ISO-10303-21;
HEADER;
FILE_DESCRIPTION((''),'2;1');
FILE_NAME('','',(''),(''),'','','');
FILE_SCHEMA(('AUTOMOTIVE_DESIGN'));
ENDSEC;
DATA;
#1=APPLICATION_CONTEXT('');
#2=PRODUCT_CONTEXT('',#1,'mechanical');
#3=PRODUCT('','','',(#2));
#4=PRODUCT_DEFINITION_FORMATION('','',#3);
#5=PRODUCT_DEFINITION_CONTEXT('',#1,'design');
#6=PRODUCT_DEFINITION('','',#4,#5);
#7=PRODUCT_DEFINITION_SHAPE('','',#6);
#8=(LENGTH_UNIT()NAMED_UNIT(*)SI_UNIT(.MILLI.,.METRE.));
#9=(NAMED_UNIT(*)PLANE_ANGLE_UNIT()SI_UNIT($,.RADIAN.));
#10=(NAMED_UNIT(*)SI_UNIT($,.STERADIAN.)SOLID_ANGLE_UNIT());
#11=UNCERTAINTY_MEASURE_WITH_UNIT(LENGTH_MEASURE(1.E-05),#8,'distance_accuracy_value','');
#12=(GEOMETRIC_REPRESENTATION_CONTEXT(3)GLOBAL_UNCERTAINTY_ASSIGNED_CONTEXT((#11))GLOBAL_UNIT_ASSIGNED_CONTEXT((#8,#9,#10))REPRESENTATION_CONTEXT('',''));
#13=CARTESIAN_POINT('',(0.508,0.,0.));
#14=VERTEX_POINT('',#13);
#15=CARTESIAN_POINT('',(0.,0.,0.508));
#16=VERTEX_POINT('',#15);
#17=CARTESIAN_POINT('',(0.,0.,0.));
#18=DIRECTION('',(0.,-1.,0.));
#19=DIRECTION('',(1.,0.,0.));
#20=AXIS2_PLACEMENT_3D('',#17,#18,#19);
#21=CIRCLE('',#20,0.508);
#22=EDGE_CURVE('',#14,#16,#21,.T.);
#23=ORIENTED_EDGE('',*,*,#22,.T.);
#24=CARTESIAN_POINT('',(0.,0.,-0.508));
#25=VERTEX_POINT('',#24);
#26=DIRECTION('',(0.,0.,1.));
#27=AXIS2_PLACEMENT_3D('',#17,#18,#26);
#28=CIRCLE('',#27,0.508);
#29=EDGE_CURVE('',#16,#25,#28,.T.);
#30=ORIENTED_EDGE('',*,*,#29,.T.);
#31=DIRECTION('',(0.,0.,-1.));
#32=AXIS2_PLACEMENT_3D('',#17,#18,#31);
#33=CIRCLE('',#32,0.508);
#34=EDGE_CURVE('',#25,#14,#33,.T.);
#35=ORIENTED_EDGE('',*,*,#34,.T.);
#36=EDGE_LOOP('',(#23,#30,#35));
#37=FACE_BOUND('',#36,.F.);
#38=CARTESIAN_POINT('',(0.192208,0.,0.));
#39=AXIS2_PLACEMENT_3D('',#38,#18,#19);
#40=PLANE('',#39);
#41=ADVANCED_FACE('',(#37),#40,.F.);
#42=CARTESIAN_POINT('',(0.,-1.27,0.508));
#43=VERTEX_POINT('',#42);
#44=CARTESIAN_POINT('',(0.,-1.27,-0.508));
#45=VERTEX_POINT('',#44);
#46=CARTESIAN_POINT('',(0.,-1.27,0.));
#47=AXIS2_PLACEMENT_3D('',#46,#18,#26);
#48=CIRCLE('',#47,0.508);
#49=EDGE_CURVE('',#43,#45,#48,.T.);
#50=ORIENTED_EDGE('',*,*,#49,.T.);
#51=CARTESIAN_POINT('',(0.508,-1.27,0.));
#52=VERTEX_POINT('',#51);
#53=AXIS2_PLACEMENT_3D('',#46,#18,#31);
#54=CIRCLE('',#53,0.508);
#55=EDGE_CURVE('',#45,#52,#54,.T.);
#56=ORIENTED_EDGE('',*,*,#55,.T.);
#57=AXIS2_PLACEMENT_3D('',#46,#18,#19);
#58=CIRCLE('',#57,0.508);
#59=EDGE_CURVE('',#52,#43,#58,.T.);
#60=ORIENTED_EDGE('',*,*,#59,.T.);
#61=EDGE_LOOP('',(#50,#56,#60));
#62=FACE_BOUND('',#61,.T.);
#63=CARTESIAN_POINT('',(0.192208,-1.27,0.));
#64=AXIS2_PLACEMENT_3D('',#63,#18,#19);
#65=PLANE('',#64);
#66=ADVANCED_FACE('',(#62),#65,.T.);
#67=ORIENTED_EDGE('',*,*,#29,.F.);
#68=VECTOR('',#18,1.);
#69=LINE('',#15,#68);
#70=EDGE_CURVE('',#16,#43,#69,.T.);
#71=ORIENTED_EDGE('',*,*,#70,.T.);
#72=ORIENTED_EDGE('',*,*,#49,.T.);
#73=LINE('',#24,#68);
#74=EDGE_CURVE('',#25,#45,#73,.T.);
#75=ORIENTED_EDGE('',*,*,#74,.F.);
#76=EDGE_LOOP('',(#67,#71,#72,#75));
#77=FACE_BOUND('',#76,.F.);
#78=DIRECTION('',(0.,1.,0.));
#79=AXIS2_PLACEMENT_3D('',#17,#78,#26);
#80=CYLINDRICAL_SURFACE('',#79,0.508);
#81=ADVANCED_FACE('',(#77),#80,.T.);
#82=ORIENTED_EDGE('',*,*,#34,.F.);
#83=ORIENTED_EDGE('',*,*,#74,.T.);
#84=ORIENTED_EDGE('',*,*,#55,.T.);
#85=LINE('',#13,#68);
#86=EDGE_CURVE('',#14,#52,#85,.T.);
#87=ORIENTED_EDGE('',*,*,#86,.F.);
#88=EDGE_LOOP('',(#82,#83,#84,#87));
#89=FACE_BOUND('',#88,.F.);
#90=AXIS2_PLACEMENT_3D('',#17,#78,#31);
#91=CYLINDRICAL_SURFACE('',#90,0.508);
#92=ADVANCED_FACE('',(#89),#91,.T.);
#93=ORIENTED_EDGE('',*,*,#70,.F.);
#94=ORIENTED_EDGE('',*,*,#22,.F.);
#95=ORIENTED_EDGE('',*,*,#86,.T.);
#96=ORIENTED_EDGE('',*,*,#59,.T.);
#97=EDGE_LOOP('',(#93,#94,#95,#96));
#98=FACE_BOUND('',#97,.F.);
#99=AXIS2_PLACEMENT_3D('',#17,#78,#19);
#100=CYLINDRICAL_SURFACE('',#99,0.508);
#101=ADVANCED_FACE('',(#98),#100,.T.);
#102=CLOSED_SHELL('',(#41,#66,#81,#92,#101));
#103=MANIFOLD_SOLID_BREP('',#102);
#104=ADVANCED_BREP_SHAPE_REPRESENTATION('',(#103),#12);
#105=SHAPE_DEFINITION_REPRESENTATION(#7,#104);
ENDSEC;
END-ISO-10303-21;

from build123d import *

# Parameters (mm, degrees)
F1_DEPTH = 1.27


# Not quite as in the source:
# - a feature names something its author has since deleted; it is built from what else it names


with BuildPart() as f1:
    # F0 (on Front) → F1 (new body)
    with BuildSketch(Plane.XZ):
        with BuildLine():
            ThreePointArc((0, -0.508), (0.3592102448, -0.3592102448), (0.508, 0))
            ThreePointArc((0.508, 0), (0.3592102448, 0.3592102448), (0, 0.508))
            Line((0, 0.508), (0, 0))
            Line((0, 0), (0, -0.508))
        make_face()
        with BuildLine():
            Line((0, 0), (0, 0.508))
            ThreePointArc((0, 0.508), (-0.508, 0), (0, -0.508))
            Line((0, -0.508), (0, 0))
        make_face()
    extrude(amount=F1_DEPTH)


solid = f1.part
